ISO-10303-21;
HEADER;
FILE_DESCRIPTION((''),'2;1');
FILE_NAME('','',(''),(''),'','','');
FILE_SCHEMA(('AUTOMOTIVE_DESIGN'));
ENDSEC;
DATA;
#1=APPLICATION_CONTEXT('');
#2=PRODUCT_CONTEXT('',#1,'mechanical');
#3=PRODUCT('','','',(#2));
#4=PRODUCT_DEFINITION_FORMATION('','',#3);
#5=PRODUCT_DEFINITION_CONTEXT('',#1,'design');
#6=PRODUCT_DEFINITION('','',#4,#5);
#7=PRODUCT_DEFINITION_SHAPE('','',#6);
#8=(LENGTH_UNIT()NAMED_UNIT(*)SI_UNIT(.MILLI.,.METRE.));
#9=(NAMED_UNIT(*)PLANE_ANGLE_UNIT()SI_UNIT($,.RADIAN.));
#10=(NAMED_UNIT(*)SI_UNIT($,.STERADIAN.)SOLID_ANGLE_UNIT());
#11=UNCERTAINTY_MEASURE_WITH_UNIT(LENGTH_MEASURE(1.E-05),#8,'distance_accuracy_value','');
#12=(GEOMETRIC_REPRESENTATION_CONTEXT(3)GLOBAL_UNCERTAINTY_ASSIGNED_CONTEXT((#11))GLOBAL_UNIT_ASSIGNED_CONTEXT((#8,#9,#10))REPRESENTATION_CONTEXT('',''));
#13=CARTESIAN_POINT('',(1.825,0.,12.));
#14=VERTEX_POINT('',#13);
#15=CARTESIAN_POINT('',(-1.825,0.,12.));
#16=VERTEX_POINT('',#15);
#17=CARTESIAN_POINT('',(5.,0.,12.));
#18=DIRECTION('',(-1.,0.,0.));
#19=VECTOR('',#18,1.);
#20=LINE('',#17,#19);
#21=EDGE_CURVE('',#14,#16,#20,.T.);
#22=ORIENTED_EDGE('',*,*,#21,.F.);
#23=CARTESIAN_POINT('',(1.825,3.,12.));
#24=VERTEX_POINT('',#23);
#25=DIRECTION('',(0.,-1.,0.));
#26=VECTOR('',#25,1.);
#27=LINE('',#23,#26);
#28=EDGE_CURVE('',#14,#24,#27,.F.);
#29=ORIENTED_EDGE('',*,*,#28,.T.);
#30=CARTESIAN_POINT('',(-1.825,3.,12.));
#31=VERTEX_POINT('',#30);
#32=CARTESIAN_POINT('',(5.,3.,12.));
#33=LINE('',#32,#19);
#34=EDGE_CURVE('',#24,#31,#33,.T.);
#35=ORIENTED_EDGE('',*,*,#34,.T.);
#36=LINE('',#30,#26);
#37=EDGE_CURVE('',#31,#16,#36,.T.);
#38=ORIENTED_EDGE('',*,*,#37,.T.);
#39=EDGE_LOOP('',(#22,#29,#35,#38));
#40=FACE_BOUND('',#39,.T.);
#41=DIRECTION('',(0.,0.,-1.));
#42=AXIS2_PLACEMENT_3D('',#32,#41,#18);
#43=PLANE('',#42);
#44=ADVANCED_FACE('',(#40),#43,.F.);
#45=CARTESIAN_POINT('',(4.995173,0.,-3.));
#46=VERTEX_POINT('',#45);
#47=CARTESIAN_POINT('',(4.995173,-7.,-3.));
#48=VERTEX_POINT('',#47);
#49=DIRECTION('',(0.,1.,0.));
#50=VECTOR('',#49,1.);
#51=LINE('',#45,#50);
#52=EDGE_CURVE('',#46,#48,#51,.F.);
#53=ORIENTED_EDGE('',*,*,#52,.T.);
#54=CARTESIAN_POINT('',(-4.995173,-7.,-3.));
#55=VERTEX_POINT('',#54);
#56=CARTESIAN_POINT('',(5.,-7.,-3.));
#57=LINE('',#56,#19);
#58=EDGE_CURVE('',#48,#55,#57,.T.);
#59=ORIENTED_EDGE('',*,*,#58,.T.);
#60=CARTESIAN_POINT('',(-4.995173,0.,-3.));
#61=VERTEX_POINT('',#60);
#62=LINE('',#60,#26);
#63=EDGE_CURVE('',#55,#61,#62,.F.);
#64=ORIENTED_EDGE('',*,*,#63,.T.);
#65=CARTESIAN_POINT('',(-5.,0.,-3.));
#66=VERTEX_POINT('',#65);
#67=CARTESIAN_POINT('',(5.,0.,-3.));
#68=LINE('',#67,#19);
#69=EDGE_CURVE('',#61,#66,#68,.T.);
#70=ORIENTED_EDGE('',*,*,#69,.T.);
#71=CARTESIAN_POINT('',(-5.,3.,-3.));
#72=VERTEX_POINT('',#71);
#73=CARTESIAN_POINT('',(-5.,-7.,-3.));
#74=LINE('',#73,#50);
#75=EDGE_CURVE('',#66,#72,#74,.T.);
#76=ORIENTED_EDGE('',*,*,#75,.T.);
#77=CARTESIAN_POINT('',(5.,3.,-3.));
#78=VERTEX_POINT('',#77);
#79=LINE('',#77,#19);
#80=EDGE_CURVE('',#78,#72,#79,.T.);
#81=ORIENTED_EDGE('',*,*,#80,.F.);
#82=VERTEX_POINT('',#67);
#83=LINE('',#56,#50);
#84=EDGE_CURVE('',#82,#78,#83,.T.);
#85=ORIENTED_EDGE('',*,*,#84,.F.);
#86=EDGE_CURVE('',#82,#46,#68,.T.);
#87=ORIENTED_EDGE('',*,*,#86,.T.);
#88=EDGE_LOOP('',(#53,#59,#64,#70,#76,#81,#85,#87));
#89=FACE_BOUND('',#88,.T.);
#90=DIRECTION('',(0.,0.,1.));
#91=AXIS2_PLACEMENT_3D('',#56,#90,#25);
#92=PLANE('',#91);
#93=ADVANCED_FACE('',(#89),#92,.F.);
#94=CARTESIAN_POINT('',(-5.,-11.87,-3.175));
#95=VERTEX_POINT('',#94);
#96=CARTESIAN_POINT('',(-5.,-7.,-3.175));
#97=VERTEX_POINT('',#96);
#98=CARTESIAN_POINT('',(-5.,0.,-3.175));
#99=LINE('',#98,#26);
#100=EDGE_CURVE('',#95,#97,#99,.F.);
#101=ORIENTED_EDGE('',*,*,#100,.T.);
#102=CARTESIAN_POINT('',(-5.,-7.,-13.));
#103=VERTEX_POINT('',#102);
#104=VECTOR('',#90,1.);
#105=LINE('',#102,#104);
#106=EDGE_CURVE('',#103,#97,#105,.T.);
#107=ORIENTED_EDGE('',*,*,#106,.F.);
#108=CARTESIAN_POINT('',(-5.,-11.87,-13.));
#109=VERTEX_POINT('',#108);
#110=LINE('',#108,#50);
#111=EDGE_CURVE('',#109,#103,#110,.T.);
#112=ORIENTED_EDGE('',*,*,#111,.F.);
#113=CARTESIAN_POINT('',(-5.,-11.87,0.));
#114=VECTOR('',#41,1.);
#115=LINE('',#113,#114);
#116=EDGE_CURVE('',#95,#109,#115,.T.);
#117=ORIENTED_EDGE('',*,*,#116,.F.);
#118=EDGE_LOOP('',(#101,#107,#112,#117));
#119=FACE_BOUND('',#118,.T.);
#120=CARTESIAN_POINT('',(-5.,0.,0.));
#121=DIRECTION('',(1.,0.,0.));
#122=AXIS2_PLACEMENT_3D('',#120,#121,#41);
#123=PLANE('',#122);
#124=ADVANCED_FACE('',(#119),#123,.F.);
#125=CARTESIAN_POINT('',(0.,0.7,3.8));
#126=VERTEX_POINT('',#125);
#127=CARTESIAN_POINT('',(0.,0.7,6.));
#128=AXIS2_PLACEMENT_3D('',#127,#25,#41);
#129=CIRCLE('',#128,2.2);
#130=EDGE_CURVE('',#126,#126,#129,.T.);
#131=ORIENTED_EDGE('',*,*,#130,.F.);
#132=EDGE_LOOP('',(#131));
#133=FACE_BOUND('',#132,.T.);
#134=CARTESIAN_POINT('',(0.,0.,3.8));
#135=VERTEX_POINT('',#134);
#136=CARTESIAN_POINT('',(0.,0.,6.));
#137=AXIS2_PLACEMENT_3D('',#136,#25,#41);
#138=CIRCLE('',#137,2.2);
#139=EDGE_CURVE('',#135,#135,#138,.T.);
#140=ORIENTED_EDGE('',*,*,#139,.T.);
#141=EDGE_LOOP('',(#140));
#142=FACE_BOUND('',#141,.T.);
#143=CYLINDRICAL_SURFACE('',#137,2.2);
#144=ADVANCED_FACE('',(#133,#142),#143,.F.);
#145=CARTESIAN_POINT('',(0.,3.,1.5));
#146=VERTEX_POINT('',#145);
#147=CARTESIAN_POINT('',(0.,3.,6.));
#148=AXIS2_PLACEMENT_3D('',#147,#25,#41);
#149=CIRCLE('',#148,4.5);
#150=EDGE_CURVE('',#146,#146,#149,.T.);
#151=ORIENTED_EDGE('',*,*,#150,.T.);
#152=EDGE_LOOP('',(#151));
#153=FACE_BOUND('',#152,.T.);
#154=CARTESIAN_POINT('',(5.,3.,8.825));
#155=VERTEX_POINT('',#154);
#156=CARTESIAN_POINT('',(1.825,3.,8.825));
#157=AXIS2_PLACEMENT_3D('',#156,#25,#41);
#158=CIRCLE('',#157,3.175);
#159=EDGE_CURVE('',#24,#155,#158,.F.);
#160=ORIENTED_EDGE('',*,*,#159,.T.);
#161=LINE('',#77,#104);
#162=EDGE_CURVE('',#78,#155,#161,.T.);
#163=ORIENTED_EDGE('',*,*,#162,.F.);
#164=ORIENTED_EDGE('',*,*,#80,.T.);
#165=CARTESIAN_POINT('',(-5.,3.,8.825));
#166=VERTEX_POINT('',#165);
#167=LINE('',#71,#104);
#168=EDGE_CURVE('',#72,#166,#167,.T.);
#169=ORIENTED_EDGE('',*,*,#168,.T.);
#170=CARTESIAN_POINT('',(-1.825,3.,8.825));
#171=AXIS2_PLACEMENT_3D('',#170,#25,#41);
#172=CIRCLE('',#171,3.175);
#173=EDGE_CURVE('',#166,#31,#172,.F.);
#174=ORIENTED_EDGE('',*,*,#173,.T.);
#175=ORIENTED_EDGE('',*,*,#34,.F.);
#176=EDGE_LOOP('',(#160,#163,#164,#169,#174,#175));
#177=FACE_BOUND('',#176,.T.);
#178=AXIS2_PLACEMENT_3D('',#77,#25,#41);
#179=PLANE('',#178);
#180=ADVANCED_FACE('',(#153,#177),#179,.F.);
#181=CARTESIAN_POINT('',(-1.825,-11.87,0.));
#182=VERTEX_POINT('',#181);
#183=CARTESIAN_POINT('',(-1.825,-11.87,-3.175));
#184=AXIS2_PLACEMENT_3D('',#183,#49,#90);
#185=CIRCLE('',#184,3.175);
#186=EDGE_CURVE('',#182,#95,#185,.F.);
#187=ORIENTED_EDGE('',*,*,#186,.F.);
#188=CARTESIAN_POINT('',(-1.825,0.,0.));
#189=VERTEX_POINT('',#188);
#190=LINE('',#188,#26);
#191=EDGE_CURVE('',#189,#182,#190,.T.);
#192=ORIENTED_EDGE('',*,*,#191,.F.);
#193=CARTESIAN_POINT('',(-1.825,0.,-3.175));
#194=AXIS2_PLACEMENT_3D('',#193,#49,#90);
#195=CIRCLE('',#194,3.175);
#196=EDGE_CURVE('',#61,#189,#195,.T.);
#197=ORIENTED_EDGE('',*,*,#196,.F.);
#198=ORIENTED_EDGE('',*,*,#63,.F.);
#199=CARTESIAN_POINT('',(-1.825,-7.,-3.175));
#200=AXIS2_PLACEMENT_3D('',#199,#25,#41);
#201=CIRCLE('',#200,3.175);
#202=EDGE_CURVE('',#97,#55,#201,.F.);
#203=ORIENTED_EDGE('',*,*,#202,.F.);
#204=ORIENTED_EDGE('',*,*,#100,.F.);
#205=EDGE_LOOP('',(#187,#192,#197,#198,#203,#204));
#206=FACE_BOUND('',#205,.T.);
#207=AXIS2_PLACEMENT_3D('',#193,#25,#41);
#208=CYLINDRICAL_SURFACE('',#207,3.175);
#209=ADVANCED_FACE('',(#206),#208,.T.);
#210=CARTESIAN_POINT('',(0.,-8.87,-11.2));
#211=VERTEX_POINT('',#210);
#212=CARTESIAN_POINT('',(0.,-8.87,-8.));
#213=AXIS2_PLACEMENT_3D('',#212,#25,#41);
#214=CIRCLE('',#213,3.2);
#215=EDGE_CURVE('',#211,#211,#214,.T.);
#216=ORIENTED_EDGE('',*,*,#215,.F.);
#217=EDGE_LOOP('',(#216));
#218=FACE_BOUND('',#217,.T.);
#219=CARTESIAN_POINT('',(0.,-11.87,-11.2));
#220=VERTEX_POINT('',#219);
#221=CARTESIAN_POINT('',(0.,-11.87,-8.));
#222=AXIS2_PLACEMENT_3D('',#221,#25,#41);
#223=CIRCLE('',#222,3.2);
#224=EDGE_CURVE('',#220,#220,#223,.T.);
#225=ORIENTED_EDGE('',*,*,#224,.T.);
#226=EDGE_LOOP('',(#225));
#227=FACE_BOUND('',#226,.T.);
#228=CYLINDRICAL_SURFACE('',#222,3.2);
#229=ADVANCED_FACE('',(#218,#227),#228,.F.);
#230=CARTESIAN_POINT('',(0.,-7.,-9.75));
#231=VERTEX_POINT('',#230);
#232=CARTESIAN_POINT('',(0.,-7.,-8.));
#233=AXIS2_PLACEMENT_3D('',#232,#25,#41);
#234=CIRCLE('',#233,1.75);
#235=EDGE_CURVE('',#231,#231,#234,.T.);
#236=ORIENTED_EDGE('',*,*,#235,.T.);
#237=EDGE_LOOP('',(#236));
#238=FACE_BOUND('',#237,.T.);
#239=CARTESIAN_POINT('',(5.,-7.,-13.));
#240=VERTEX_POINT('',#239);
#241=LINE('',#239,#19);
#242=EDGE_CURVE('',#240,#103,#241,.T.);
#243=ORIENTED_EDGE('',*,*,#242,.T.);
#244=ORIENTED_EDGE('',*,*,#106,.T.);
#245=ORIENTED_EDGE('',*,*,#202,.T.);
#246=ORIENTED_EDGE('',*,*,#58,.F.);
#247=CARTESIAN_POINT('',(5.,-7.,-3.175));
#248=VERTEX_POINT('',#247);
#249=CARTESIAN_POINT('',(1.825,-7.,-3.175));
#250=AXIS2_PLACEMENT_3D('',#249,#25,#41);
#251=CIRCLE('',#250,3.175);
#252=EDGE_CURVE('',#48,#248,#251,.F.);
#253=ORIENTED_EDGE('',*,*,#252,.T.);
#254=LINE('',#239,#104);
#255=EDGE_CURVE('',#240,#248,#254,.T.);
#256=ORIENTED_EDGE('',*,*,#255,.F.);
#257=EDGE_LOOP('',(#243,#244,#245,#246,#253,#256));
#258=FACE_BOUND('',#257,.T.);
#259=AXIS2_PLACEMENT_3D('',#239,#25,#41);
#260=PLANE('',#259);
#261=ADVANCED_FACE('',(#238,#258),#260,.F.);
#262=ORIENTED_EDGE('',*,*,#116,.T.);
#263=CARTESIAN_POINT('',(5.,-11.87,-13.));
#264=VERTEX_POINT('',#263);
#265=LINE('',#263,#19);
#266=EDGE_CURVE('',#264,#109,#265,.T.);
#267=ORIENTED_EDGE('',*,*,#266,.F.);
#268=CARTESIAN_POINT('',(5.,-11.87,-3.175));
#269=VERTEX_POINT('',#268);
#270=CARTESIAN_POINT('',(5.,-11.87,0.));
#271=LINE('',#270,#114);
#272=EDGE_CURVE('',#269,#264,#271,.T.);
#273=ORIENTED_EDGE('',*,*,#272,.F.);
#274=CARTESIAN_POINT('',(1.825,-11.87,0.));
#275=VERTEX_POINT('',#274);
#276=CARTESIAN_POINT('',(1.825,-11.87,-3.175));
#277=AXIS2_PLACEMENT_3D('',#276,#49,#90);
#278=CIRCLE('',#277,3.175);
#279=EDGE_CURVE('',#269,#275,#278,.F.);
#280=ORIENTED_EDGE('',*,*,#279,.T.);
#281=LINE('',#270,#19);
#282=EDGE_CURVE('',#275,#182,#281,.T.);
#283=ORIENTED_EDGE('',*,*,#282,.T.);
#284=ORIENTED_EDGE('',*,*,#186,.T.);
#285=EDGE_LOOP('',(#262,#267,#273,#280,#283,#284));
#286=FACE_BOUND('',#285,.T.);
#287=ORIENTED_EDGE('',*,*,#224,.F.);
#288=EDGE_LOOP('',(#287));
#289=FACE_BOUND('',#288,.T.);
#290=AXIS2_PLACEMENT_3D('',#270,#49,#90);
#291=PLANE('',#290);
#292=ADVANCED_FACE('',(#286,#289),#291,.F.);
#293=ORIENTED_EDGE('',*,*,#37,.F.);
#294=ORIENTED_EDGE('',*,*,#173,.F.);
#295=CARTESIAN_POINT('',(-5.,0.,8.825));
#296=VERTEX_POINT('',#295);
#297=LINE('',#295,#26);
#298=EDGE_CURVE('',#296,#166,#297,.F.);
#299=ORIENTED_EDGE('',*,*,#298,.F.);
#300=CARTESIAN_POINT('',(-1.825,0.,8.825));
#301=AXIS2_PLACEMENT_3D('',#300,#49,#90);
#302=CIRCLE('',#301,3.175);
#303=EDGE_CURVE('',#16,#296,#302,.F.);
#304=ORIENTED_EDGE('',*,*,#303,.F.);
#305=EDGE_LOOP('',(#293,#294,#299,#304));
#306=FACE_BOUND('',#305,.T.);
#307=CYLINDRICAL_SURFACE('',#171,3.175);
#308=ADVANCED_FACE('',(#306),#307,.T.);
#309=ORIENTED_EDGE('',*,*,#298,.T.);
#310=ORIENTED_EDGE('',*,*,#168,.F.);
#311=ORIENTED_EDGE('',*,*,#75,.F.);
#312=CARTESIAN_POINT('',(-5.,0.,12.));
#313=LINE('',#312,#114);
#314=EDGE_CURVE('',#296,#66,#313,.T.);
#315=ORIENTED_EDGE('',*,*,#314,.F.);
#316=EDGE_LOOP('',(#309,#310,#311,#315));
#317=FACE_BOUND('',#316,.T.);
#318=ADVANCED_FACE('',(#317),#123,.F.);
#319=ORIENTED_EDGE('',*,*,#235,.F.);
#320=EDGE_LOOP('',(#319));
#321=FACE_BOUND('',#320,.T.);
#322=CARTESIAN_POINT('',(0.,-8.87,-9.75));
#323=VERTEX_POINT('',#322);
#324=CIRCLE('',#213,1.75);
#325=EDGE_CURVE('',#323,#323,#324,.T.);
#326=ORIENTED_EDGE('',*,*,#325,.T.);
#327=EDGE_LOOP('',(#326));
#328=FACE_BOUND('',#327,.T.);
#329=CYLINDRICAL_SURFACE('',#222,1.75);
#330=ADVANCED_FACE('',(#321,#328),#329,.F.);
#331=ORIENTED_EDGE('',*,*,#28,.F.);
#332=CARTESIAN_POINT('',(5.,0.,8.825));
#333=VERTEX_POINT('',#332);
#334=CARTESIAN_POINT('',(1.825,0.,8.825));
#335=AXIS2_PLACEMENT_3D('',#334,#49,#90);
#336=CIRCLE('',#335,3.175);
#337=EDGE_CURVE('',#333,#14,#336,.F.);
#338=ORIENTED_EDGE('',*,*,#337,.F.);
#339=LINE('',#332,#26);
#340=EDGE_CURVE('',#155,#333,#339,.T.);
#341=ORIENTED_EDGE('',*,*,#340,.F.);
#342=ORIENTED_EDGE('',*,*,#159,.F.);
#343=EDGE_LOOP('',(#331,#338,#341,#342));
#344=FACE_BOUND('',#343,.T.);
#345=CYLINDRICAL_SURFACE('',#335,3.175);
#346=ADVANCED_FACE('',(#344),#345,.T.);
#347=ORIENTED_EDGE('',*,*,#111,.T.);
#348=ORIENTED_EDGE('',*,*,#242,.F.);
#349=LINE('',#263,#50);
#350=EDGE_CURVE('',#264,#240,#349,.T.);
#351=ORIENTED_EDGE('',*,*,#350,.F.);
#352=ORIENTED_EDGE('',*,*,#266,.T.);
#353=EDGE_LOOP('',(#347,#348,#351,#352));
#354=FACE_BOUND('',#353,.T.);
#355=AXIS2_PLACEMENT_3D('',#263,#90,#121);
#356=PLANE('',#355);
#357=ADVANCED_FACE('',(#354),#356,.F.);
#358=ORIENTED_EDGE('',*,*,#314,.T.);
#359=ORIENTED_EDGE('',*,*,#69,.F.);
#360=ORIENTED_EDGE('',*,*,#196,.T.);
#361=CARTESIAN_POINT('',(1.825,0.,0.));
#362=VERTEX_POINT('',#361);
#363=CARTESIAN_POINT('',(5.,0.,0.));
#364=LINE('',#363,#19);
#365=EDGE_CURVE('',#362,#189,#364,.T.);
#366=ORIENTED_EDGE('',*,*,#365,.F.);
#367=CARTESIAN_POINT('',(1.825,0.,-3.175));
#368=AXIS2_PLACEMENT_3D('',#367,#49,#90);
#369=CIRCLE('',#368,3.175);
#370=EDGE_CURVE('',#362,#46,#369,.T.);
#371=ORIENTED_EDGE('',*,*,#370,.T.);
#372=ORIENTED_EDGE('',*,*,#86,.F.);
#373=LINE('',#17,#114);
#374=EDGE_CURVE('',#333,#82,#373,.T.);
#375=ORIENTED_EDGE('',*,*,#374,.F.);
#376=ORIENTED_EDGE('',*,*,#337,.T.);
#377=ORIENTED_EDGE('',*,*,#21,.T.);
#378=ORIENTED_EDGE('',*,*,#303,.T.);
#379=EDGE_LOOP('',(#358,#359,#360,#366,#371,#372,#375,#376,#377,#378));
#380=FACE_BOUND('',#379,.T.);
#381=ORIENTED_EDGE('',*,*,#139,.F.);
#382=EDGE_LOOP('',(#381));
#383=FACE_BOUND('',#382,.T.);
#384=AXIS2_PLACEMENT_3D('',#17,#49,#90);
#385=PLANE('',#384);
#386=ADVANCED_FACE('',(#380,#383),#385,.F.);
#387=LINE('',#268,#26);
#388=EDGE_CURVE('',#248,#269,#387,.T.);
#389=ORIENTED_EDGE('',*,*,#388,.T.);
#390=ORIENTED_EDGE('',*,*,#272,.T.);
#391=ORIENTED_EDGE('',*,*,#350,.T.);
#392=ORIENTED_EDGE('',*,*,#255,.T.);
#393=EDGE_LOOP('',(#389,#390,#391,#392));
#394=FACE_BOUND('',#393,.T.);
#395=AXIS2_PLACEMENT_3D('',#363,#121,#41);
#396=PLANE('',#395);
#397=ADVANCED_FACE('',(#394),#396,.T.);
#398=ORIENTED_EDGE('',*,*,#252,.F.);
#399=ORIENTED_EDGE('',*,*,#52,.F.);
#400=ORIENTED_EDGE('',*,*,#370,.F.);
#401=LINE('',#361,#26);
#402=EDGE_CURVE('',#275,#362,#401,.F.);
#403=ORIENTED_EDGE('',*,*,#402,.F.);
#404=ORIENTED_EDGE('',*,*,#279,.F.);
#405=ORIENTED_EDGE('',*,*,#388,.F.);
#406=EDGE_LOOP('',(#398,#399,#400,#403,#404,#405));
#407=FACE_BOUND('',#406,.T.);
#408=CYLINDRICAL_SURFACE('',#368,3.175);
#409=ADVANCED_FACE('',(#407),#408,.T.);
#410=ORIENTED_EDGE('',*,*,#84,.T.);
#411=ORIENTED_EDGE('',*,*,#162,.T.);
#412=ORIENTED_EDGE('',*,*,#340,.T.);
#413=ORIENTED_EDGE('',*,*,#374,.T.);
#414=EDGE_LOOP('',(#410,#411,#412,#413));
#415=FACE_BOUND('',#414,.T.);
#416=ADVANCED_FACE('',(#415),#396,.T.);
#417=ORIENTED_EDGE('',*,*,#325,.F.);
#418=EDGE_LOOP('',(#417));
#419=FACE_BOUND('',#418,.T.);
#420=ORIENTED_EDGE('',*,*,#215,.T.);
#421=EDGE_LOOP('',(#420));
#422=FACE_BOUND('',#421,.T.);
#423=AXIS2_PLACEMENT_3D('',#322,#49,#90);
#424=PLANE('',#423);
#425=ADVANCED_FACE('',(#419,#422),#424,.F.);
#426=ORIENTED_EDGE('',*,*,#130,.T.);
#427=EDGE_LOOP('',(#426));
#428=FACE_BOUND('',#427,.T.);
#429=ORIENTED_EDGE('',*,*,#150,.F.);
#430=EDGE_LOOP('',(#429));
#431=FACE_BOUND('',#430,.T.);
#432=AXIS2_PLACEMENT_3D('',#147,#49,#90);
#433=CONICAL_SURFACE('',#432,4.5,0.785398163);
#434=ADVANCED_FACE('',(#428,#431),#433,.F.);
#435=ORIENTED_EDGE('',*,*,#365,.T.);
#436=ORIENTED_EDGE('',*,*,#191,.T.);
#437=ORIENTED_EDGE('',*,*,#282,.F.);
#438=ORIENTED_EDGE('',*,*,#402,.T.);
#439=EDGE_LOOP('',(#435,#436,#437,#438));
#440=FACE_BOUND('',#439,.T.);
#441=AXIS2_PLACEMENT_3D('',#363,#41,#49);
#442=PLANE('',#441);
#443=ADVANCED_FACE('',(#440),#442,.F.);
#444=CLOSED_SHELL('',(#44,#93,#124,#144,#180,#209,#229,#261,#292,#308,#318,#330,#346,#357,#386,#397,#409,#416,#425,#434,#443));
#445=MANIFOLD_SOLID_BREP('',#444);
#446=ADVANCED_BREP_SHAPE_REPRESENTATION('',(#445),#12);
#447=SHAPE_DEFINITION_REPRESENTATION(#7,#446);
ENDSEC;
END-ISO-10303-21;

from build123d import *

# Parameters (mm, degrees)
BOSS_EXTRUDE1_DEPTH = 5
FILLET2_R           = 3.175


with BuildPart() as part:
    # Sketch1 → Boss-Extrude1 (new, symmetric)
    with BuildSketch(Plane(origin=(0, 0, 0), x_dir=(0, 0, -1), z_dir=(1, 0, 0))):
        Polygon((-12, 0), (0, 0), (0, -11.87), (13, -11.87), (13, -7), (3, -7), (3, 3), (-12, 3), align=None)
    extrude(amount=BOSS_EXTRUDE1_DEPTH, both=True)

    # Sketch4 → Cut-Revolve1 (revolve, cut)
    with BuildSketch(Plane(origin=(0, 0, 0), x_dir=(0, 0, -1), z_dir=(1, 0, 0)), mode=Mode.PRIVATE) as cut_revolve1_sk:
        Polygon((-6, 3), (-10.5, 3), (-8.2, 0.7), (-8.2, 0), (-6, 0), align=None)
    revolve(cut_revolve1_sk.sketch.rotate(Axis((0, 0, 6), (0, 1, 0)), 180), axis=Axis((0, 0, 6), (0, 1, 0)), mode=Mode.SUBTRACT)

    # Sketch5 → Cut-Revolve2 (revolve, cut)
    with BuildSketch(Plane(origin=(0, 0, 0), x_dir=(0, 0, -1), z_dir=(1, 0, 0))):
        Polygon((8, -11.87), (8, -7), (9.75, -7), (9.75, -8.87), (11.2, -8.87), (11.2, -11.87), align=None)
    revolve(axis=Axis((0, -11.87, -8), (0, 1, 0)), mode=Mode.SUBTRACT)

    # Fillet2
    # the kernel refuses this fillet: 3.175 mm, written as the material it takes off along each edge
    with BuildSketch(Plane(origin=(-5, 0, 0), x_dir=(0, 0, -1), z_dir=(0, -1, 0)), Plane(origin=(5, 0, 0), x_dir=(-1, 0, 0), z_dir=(0, -1, 0))) as fillet2_piece_1:
        with BuildLine():
            CenterArc((FILLET2_R, FILLET2_R), FILLET2_R, 180, 90)
            Line((0, FILLET2_R), (0, 0))
            Line((0, 0), (FILLET2_R, 0))
        make_face()
    extrude(amount=19.8075, mode=Mode.SUBTRACT)
    with BuildSketch(Plane(origin=(-5, 10.9375, 12), x_dir=(0, 0, -1), z_dir=(0, -1, 0)), Plane(origin=(5, 10.9375, 12), x_dir=(-1, 0, 0), z_dir=(0, -1, 0))) as fillet2_piece_2:
        with BuildLine():
            CenterArc((FILLET2_R, FILLET2_R), FILLET2_R, 180, 90)
            Line((0, FILLET2_R), (0, 0))
            Line((0, 0), (FILLET2_R, 0))
        make_face()
    extrude(amount=18.875, mode=Mode.SUBTRACT)


solid = part.part
